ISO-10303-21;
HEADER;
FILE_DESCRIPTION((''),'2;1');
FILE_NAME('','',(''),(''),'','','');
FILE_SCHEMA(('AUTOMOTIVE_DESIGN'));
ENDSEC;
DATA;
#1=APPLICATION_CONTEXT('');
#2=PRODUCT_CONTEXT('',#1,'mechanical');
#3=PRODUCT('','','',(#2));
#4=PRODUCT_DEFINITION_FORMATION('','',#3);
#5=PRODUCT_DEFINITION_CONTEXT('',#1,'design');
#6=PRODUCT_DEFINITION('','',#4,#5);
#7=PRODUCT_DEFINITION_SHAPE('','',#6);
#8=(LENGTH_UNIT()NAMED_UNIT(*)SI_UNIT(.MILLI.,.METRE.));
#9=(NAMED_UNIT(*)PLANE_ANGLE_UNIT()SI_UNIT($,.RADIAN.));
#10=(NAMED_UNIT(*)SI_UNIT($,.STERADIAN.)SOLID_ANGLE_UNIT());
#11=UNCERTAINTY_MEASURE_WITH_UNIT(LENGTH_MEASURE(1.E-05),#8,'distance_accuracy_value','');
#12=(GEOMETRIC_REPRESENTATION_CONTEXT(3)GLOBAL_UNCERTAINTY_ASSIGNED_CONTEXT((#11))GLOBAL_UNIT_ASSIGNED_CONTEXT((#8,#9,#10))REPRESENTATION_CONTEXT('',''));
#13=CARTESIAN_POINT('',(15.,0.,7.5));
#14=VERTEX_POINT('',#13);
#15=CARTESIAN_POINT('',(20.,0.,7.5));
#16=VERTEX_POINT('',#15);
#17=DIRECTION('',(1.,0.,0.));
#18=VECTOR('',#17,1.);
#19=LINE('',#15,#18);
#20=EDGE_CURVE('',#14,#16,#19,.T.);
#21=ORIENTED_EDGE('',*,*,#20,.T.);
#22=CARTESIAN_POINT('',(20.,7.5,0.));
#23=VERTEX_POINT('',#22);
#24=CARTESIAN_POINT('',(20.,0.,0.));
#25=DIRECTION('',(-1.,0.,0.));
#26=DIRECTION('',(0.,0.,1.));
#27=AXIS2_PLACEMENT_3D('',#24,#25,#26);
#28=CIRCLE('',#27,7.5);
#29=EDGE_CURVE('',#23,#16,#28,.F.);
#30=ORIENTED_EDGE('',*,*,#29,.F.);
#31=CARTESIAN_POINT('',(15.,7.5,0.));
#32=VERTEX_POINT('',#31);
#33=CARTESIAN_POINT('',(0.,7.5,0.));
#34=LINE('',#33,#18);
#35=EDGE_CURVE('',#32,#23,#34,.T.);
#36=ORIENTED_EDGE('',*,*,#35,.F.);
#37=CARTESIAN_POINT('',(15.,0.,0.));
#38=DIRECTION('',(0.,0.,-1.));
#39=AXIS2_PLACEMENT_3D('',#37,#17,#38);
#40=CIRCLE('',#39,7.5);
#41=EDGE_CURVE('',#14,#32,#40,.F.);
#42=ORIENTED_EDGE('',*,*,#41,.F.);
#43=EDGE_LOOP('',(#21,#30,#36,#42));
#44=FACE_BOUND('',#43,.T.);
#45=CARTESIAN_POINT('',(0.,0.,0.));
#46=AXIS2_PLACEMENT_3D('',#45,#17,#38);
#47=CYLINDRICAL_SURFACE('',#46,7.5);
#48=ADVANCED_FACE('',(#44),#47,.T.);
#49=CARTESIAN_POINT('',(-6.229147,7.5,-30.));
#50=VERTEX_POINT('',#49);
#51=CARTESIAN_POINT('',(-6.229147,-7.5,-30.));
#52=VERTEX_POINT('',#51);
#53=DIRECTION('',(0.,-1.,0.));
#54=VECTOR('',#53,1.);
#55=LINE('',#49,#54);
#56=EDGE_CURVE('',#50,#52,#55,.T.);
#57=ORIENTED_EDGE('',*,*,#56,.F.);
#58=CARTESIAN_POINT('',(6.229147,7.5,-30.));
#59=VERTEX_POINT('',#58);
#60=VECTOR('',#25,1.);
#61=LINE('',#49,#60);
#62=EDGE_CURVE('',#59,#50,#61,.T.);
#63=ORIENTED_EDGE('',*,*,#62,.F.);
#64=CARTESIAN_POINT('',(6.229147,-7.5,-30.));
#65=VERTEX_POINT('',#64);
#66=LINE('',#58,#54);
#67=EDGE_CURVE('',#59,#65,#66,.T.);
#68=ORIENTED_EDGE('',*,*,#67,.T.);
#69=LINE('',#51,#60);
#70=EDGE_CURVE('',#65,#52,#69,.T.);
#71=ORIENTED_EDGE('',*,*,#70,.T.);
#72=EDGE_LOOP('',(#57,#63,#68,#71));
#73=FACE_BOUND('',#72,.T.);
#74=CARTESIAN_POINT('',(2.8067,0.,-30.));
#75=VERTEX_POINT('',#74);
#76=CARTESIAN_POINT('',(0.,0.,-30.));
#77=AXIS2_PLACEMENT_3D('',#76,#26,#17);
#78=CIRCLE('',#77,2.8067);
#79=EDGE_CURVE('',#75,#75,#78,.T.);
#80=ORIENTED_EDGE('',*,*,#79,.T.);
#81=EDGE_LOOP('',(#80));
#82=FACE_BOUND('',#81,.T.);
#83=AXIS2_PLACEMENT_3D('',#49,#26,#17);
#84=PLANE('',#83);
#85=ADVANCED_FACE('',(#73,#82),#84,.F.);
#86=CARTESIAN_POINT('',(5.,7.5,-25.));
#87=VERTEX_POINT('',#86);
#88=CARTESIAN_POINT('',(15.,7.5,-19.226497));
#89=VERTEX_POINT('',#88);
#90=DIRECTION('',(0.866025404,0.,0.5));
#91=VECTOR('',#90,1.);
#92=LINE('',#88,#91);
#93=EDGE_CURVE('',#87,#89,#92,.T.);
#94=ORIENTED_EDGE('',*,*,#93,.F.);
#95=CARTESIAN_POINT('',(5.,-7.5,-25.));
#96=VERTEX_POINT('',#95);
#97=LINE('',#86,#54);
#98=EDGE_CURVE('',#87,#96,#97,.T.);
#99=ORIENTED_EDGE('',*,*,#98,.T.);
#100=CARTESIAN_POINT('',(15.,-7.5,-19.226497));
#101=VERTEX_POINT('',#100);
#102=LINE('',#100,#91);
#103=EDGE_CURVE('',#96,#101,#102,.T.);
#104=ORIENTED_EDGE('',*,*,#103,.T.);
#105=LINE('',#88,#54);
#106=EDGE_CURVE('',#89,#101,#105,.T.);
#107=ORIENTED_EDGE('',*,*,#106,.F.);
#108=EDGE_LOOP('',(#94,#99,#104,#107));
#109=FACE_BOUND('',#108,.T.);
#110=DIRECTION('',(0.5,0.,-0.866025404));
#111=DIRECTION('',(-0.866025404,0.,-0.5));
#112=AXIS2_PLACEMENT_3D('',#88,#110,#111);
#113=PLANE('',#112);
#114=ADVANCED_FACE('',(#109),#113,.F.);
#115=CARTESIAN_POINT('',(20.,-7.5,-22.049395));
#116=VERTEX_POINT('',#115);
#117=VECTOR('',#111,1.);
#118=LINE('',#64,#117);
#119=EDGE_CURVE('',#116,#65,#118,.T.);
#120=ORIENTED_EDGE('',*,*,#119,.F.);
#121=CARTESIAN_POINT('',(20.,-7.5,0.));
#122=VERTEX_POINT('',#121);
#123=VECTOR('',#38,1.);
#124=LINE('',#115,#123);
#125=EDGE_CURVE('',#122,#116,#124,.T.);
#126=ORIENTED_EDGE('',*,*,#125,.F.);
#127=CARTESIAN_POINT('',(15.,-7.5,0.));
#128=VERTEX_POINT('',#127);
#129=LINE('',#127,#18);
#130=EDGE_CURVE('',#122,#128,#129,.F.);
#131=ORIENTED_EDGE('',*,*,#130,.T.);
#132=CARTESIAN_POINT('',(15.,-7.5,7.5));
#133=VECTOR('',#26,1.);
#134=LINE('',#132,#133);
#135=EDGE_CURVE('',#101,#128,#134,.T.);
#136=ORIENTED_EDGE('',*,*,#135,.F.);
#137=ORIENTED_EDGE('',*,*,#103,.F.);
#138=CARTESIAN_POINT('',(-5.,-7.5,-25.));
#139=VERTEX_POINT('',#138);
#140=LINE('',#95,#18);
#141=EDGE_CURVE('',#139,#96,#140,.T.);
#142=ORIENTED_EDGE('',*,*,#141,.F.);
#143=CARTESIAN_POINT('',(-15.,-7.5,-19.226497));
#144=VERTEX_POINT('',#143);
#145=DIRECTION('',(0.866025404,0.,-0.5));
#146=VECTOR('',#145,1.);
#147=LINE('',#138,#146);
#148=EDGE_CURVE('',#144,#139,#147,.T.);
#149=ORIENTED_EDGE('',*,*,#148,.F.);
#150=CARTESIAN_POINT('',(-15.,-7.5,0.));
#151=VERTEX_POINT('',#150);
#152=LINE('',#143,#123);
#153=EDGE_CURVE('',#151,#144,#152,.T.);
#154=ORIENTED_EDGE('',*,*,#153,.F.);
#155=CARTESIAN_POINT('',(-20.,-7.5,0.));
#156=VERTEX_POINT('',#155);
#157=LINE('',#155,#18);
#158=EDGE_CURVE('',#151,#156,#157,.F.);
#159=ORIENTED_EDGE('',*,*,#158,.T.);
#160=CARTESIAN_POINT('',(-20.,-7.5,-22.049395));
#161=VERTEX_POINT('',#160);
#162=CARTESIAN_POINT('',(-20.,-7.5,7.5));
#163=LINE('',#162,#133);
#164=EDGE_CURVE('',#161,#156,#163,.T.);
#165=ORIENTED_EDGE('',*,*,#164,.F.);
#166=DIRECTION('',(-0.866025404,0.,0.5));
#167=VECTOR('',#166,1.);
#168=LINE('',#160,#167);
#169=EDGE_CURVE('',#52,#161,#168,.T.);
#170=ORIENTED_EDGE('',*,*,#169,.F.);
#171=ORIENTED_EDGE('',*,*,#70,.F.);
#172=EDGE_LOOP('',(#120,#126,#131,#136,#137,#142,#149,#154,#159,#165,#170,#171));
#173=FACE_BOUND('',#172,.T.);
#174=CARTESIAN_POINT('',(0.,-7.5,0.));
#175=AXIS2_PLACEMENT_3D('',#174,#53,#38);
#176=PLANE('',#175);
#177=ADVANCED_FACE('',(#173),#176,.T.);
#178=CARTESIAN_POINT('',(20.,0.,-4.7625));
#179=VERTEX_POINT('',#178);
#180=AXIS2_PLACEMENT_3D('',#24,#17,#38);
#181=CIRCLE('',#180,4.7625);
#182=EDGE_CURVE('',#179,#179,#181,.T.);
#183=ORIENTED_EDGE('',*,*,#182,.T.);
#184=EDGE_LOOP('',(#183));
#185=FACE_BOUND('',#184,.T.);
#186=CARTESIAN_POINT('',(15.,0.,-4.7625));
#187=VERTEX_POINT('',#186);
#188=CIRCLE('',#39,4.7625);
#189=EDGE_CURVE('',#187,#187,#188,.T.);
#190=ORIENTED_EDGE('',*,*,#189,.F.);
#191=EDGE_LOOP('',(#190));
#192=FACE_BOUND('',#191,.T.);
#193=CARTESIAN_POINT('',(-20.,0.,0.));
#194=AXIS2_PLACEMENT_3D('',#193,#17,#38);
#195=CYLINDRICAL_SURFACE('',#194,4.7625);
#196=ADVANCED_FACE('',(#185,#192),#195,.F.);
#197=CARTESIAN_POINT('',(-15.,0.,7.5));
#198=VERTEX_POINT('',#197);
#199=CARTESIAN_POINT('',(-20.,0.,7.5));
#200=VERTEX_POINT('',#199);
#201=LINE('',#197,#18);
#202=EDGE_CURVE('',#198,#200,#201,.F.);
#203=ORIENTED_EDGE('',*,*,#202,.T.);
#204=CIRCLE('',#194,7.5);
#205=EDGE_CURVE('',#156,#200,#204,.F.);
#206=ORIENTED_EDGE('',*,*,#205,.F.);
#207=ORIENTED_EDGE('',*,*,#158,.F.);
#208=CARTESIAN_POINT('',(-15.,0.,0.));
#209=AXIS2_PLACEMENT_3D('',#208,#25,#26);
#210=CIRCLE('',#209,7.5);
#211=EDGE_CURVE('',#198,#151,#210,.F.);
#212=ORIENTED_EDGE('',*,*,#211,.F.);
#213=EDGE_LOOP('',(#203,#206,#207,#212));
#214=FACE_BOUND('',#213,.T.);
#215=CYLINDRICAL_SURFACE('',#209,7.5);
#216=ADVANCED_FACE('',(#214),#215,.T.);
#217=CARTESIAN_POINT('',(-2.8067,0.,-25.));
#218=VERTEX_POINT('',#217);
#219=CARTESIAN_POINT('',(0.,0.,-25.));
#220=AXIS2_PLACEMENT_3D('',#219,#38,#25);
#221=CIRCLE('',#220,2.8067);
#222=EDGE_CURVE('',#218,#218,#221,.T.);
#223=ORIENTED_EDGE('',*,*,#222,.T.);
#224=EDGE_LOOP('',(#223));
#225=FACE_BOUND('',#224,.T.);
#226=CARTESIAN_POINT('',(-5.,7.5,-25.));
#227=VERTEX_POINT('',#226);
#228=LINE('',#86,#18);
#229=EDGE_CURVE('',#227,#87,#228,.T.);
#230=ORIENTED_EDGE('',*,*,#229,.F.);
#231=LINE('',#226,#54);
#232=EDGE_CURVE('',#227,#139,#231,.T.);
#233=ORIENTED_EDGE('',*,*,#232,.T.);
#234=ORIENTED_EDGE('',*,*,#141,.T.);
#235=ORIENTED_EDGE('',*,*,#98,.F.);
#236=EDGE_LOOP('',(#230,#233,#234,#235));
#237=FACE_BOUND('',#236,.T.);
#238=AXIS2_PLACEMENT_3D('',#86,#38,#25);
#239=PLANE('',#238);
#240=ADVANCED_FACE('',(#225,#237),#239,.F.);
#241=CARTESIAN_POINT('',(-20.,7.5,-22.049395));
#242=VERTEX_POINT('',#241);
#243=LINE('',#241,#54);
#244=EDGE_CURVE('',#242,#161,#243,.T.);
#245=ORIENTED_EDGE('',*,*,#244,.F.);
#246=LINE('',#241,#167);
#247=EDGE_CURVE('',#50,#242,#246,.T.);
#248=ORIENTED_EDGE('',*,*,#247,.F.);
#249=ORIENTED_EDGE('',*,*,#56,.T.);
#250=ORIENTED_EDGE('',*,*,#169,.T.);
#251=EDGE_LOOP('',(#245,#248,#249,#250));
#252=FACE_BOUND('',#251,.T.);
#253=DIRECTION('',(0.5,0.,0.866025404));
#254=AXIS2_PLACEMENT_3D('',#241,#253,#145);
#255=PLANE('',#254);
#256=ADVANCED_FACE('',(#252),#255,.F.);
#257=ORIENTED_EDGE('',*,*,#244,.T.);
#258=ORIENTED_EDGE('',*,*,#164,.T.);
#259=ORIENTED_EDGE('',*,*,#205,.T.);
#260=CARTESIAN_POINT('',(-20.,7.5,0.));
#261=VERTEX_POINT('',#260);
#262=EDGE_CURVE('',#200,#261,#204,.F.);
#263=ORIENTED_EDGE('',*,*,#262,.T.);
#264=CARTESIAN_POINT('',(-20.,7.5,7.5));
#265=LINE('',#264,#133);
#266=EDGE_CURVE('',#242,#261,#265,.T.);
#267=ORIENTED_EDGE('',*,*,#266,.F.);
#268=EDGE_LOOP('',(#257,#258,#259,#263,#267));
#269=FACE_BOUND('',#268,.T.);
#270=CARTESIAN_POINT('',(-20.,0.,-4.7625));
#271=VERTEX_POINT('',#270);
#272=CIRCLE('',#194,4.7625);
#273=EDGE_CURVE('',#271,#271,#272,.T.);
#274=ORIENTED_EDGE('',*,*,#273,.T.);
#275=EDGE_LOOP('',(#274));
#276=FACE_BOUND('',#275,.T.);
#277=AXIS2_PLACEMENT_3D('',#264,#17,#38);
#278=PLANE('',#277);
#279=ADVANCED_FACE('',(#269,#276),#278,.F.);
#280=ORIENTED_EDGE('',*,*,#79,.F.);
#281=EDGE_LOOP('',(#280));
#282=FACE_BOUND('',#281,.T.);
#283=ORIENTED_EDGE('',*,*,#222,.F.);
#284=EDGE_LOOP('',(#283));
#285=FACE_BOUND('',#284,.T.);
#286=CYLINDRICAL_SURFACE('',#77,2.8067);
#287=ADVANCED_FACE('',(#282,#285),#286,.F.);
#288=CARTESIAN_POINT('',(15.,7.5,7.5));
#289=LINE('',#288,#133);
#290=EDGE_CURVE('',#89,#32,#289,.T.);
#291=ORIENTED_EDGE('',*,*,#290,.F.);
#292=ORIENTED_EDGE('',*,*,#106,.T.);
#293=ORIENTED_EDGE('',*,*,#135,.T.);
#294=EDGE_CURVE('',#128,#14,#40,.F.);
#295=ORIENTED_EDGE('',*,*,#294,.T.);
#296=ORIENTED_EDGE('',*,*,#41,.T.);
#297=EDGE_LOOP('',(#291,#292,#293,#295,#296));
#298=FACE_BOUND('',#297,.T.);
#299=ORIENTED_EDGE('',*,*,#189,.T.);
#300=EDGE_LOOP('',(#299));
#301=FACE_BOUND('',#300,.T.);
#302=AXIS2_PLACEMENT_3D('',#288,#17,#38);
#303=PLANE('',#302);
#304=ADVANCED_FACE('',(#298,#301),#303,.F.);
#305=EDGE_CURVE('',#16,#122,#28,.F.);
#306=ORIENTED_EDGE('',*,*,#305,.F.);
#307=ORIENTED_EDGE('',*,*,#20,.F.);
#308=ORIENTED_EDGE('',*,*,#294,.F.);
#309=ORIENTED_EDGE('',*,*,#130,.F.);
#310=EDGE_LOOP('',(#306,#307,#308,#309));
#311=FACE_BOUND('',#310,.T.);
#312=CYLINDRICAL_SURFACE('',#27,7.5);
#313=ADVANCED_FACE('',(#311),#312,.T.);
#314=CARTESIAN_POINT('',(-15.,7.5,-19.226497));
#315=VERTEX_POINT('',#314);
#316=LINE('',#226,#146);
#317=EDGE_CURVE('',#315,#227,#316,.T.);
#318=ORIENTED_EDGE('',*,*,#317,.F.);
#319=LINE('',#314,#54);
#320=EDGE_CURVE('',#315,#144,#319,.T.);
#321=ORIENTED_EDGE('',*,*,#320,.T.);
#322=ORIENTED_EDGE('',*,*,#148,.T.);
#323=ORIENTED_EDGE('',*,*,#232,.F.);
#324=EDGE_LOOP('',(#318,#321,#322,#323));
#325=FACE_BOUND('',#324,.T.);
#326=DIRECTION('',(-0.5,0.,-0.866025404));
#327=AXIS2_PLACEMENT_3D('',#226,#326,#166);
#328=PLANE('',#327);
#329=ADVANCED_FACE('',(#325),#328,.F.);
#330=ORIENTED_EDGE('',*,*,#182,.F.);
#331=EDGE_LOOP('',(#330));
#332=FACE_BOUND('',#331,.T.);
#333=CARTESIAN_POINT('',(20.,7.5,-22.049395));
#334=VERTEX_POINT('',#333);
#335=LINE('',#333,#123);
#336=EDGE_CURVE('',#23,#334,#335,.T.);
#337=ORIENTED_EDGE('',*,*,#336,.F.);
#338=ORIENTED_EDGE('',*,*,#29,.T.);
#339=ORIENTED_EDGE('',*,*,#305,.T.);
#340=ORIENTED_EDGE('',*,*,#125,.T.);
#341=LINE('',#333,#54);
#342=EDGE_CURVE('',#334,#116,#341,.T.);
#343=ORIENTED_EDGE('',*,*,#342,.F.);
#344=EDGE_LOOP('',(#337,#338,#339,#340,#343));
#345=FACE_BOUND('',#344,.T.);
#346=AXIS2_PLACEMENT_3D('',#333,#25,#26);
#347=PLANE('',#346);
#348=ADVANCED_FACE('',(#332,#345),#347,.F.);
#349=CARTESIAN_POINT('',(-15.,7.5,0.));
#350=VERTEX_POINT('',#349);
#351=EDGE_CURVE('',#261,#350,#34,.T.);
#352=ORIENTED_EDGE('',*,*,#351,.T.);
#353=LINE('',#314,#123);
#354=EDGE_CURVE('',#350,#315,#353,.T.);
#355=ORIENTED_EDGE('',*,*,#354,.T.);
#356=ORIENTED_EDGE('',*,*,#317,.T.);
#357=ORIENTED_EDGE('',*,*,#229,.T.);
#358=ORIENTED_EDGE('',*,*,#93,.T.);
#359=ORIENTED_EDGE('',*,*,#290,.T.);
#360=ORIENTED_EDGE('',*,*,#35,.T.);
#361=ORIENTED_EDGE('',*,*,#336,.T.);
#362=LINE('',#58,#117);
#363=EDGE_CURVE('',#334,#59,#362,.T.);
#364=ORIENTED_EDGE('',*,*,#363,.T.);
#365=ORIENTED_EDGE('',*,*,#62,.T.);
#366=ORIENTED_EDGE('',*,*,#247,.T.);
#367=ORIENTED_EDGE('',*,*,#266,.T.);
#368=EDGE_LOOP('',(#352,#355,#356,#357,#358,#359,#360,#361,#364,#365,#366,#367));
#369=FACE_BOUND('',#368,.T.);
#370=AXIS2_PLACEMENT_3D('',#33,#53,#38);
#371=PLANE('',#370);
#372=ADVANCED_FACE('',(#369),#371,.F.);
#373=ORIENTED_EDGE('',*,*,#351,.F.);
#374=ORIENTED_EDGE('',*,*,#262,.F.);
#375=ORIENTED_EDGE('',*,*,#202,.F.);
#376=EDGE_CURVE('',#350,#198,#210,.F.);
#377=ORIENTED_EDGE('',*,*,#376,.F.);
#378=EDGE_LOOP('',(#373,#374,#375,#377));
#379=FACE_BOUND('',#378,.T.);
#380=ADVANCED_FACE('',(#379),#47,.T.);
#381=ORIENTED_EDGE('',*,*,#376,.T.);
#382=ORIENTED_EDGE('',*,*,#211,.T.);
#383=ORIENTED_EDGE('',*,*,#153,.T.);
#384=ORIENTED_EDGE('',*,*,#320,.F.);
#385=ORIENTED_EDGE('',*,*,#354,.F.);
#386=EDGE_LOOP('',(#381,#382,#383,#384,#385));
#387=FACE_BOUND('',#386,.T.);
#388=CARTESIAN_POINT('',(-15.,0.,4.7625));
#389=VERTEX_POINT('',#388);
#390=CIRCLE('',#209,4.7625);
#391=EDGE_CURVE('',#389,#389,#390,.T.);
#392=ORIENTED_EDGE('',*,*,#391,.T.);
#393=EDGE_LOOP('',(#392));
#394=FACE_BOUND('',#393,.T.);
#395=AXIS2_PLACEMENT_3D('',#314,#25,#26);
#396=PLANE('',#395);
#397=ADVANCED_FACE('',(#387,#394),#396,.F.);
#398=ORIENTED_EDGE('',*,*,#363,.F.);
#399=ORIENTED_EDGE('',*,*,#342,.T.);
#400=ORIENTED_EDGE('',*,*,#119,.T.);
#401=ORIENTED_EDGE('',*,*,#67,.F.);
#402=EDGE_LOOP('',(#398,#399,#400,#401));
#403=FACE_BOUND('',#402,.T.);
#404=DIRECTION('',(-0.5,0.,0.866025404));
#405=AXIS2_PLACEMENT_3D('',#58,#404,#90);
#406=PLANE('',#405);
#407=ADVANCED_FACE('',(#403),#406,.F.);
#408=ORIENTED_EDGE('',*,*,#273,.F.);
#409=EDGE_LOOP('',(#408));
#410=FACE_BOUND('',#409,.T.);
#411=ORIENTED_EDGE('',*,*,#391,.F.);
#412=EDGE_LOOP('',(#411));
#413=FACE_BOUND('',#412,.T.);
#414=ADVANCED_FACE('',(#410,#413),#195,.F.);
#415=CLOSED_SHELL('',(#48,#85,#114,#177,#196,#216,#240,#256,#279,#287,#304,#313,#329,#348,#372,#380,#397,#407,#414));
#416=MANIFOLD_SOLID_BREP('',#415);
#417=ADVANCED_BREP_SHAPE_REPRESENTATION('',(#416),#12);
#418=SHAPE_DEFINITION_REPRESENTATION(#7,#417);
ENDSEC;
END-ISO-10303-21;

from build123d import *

# Parameters (mm, degrees)
BOSS_EXTRUDE1_DEPTH     = 7.5
CUT_EXTRUDE1_DEPTH      = 37.827299657
CUT_EXTRUDE1_DEPTH_BACK = 37.827299657
SKETCH3_R               = 4.7625
FILLET1_R               = 7.5
SKETCH4_R               = 2.8067
CUT_EXTRUDE2_DEPTH      = 37.827299657


with BuildPart() as part:
    # Sketch1 → Boss-Extrude1 (new, symmetric)
    with BuildSketch(Plane(origin=(0, 0, 0), x_dir=(1, 0, 0), z_dir=(0, 1, 0))):
        Polygon((-15, -7.5), (-20, -7.5), (-20, 22.049394585), (-6.22914747, 30), (6.22914747, 30), (20, 22.049394585), (20, -7.5), (15, -7.5), (15, 19.226497308), (5, 25), (-5, 25), (-15, 19.226497308), align=None)
    extrude(amount=BOSS_EXTRUDE1_DEPTH, both=True)

    # Sketch3 → Cut-Extrude1 (cut, two sides: drawn at the far end of the back side and taken through both)
    with BuildSketch(Plane(origin=(0, 0, 0), x_dir=(0, 0, -1), z_dir=(1, 0, 0)).offset(-CUT_EXTRUDE1_DEPTH_BACK)):
        Circle(SKETCH3_R)
    extrude(amount=CUT_EXTRUDE1_DEPTH + CUT_EXTRUDE1_DEPTH_BACK, mode=Mode.SUBTRACT)

    # Fillet1
    fillet1_edges = [part.edges().sort_by_distance(p)[0] for p in [
        (17.5, 7.5, 7.5),
        (17.5, -7.5, 7.5),
        (-17.5, -7.5, 7.5),
        (-17.5, 7.5, 7.5),
    ]]
    fillet(fillet1_edges, radius=FILLET1_R - 0.0001)  # a hair under: the kernel refuses the full size

    # Sketch4 → Cut-Extrude2 (cut, through all)
    with BuildSketch(Plane.XY):
        Circle(SKETCH4_R)
    extrude(amount=-CUT_EXTRUDE2_DEPTH, mode=Mode.SUBTRACT)


solid = part.part
